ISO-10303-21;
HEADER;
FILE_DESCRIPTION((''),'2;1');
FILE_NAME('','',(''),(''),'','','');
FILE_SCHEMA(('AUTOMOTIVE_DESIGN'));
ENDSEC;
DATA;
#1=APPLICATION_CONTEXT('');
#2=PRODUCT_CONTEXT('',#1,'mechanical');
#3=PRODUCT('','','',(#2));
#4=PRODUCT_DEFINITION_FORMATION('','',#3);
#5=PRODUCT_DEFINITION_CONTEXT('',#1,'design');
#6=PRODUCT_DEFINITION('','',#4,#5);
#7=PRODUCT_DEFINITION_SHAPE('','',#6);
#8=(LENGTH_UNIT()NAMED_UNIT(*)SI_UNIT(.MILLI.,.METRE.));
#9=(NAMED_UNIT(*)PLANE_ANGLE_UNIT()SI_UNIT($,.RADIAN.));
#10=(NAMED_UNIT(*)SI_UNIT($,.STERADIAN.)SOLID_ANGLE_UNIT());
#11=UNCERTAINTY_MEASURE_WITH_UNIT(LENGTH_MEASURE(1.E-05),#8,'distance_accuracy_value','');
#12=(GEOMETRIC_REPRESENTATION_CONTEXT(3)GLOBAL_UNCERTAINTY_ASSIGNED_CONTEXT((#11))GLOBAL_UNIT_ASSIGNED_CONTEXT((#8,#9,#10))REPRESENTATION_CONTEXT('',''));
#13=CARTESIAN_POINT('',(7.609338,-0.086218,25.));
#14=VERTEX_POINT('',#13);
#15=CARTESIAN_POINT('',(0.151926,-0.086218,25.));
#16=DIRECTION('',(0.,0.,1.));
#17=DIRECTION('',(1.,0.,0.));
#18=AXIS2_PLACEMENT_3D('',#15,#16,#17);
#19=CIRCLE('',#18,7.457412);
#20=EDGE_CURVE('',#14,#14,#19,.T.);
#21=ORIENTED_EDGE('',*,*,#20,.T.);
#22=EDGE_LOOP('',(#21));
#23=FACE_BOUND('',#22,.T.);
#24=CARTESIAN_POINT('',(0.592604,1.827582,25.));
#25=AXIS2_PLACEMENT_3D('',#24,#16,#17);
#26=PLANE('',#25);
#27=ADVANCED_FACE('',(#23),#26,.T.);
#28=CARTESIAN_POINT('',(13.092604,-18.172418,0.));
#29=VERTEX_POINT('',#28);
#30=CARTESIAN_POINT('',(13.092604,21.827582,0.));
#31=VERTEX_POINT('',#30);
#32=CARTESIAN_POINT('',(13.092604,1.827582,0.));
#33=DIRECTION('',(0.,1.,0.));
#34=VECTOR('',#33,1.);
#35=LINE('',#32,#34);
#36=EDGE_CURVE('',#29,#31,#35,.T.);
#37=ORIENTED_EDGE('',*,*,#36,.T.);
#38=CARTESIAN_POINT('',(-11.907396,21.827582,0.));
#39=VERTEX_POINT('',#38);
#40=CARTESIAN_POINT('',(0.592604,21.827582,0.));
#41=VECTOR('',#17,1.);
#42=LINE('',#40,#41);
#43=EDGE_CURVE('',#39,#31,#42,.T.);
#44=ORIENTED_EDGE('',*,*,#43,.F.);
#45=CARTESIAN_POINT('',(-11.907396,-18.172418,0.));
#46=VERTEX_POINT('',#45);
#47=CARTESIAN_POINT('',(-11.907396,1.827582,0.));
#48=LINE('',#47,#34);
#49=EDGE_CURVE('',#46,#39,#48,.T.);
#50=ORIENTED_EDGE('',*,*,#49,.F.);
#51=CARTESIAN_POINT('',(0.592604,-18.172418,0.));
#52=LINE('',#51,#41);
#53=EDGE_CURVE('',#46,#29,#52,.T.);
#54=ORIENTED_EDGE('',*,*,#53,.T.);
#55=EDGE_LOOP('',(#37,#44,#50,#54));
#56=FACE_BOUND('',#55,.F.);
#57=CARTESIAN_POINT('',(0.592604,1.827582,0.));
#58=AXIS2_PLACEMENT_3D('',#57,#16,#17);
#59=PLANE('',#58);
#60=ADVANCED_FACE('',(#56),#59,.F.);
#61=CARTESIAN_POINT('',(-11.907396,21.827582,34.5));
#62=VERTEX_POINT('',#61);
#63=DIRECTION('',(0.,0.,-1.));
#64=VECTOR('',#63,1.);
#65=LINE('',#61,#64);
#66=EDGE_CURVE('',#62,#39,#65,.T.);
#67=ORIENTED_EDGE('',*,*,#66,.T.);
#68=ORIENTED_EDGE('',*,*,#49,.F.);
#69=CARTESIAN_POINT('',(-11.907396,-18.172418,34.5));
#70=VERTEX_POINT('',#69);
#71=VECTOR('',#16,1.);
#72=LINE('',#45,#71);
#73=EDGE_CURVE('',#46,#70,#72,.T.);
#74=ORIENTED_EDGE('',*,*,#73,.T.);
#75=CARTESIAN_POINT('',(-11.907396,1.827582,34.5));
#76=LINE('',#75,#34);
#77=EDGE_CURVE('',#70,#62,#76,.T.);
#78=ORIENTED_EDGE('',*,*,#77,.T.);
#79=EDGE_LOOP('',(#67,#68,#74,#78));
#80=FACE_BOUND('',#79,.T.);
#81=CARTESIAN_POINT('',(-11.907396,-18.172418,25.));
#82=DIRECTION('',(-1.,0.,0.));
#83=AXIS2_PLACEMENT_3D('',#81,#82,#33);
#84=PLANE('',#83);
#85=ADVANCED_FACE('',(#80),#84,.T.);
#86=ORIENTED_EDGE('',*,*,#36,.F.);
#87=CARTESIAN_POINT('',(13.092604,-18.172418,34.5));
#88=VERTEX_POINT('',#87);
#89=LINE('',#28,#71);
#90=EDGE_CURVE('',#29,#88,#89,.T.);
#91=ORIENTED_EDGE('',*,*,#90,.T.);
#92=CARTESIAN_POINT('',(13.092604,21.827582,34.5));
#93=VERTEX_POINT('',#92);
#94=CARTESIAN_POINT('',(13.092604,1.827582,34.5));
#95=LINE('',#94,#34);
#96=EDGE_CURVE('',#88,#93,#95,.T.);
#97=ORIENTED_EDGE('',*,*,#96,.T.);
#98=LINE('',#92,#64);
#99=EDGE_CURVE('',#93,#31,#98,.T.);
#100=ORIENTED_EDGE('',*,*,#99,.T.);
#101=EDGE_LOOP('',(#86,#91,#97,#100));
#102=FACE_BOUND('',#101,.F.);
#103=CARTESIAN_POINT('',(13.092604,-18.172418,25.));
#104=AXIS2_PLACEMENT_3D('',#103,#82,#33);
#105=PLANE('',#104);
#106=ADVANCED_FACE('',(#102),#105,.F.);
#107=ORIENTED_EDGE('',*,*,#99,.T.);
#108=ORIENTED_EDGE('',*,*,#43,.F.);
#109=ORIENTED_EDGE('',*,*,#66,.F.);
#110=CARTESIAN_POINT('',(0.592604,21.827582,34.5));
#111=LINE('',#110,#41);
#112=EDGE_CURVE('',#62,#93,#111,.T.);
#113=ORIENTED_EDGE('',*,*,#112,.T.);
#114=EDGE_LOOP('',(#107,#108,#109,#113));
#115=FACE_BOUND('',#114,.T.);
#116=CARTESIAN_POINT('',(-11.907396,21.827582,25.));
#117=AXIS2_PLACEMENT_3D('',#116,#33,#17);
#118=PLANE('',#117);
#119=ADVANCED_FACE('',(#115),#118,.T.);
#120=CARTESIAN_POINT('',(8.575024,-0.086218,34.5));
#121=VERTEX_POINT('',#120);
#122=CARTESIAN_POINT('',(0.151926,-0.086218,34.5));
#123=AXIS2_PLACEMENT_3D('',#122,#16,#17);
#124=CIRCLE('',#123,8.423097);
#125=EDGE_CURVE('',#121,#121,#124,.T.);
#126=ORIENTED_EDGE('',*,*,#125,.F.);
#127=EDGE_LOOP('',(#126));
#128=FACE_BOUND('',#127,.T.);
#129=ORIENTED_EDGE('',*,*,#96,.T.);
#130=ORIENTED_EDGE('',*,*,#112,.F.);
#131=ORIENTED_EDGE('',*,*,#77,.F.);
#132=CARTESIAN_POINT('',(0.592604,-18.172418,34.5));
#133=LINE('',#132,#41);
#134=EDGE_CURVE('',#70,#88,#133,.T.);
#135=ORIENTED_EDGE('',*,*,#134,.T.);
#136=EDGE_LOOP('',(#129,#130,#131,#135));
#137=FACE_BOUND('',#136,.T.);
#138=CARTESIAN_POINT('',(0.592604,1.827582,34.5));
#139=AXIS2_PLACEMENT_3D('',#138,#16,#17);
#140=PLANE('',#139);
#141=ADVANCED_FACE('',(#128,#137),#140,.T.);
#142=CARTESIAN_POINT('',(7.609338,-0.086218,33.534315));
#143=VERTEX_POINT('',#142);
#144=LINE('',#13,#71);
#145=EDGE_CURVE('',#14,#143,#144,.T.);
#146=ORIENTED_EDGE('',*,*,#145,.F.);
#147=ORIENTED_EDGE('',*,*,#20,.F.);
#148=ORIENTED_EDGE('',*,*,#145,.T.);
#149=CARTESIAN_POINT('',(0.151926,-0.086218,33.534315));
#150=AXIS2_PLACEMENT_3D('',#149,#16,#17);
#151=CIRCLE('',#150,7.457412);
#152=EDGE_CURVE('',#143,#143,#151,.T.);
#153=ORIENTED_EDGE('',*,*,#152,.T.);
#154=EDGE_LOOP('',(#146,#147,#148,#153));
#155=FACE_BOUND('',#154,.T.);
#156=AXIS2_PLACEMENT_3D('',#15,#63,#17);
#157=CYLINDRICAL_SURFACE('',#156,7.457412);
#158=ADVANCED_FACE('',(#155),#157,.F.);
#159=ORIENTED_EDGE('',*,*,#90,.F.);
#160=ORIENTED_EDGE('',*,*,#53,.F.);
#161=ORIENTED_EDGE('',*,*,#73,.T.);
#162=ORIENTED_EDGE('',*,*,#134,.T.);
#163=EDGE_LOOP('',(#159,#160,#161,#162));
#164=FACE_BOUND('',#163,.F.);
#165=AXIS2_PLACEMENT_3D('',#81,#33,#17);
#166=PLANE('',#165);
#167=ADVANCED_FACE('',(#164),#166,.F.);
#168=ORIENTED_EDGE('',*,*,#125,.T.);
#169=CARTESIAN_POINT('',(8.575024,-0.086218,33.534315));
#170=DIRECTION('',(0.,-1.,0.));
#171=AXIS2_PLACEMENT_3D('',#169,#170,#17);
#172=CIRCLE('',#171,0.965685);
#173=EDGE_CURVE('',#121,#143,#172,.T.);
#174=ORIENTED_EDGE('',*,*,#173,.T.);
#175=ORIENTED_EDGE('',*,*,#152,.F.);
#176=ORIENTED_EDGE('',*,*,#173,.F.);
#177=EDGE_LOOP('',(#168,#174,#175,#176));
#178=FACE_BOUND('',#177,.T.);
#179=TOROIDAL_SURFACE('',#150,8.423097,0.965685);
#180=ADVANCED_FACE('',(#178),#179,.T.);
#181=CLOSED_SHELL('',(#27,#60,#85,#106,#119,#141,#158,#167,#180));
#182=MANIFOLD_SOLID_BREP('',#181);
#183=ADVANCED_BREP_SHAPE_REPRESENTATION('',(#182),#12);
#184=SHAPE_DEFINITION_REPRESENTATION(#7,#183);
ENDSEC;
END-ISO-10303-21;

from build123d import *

# Parameters (mm, degrees)
F0_W     = 25
F0_H     = 40
F1_DEPTH = 25
F2_W     = 25
F2_H     = 40
F2_R     = 7.4574120062
F3_DEPTH = 9.5
F5_R     = 0.9656854249


# Not quite as in the source:
# - the program builds the solid bodies; features that only make, move or delete a surface that nothing else refers to are left out


with BuildPart() as f1:
    # F0 (on Top) → F1 (new body)
    with BuildSketch(Plane.XY):
        with Locations((0.5926040933, 1.8275822699)):
            Rectangle(F0_W, F0_H)
    extrude(amount=F1_DEPTH)

    # F2 (on face) → F3 (join)
    with BuildSketch(Plane.XY.offset(25)):
        with Locations((0.5926040933, 1.8275822699)):
            Rectangle(F2_W, F2_H)
        with Locations((0.1519261859, -0.08621795)):
            Circle(F2_R, mode=Mode.SUBTRACT)
    extrude(amount=F3_DEPTH)

    # F5
    f5_edges = [f1.edges().sort_by_distance(p)[0] for p in [
        (-7.305486, -0.086218, 34.5),
    ]]
    fillet(f5_edges, radius=F5_R)


solid = f1.part
